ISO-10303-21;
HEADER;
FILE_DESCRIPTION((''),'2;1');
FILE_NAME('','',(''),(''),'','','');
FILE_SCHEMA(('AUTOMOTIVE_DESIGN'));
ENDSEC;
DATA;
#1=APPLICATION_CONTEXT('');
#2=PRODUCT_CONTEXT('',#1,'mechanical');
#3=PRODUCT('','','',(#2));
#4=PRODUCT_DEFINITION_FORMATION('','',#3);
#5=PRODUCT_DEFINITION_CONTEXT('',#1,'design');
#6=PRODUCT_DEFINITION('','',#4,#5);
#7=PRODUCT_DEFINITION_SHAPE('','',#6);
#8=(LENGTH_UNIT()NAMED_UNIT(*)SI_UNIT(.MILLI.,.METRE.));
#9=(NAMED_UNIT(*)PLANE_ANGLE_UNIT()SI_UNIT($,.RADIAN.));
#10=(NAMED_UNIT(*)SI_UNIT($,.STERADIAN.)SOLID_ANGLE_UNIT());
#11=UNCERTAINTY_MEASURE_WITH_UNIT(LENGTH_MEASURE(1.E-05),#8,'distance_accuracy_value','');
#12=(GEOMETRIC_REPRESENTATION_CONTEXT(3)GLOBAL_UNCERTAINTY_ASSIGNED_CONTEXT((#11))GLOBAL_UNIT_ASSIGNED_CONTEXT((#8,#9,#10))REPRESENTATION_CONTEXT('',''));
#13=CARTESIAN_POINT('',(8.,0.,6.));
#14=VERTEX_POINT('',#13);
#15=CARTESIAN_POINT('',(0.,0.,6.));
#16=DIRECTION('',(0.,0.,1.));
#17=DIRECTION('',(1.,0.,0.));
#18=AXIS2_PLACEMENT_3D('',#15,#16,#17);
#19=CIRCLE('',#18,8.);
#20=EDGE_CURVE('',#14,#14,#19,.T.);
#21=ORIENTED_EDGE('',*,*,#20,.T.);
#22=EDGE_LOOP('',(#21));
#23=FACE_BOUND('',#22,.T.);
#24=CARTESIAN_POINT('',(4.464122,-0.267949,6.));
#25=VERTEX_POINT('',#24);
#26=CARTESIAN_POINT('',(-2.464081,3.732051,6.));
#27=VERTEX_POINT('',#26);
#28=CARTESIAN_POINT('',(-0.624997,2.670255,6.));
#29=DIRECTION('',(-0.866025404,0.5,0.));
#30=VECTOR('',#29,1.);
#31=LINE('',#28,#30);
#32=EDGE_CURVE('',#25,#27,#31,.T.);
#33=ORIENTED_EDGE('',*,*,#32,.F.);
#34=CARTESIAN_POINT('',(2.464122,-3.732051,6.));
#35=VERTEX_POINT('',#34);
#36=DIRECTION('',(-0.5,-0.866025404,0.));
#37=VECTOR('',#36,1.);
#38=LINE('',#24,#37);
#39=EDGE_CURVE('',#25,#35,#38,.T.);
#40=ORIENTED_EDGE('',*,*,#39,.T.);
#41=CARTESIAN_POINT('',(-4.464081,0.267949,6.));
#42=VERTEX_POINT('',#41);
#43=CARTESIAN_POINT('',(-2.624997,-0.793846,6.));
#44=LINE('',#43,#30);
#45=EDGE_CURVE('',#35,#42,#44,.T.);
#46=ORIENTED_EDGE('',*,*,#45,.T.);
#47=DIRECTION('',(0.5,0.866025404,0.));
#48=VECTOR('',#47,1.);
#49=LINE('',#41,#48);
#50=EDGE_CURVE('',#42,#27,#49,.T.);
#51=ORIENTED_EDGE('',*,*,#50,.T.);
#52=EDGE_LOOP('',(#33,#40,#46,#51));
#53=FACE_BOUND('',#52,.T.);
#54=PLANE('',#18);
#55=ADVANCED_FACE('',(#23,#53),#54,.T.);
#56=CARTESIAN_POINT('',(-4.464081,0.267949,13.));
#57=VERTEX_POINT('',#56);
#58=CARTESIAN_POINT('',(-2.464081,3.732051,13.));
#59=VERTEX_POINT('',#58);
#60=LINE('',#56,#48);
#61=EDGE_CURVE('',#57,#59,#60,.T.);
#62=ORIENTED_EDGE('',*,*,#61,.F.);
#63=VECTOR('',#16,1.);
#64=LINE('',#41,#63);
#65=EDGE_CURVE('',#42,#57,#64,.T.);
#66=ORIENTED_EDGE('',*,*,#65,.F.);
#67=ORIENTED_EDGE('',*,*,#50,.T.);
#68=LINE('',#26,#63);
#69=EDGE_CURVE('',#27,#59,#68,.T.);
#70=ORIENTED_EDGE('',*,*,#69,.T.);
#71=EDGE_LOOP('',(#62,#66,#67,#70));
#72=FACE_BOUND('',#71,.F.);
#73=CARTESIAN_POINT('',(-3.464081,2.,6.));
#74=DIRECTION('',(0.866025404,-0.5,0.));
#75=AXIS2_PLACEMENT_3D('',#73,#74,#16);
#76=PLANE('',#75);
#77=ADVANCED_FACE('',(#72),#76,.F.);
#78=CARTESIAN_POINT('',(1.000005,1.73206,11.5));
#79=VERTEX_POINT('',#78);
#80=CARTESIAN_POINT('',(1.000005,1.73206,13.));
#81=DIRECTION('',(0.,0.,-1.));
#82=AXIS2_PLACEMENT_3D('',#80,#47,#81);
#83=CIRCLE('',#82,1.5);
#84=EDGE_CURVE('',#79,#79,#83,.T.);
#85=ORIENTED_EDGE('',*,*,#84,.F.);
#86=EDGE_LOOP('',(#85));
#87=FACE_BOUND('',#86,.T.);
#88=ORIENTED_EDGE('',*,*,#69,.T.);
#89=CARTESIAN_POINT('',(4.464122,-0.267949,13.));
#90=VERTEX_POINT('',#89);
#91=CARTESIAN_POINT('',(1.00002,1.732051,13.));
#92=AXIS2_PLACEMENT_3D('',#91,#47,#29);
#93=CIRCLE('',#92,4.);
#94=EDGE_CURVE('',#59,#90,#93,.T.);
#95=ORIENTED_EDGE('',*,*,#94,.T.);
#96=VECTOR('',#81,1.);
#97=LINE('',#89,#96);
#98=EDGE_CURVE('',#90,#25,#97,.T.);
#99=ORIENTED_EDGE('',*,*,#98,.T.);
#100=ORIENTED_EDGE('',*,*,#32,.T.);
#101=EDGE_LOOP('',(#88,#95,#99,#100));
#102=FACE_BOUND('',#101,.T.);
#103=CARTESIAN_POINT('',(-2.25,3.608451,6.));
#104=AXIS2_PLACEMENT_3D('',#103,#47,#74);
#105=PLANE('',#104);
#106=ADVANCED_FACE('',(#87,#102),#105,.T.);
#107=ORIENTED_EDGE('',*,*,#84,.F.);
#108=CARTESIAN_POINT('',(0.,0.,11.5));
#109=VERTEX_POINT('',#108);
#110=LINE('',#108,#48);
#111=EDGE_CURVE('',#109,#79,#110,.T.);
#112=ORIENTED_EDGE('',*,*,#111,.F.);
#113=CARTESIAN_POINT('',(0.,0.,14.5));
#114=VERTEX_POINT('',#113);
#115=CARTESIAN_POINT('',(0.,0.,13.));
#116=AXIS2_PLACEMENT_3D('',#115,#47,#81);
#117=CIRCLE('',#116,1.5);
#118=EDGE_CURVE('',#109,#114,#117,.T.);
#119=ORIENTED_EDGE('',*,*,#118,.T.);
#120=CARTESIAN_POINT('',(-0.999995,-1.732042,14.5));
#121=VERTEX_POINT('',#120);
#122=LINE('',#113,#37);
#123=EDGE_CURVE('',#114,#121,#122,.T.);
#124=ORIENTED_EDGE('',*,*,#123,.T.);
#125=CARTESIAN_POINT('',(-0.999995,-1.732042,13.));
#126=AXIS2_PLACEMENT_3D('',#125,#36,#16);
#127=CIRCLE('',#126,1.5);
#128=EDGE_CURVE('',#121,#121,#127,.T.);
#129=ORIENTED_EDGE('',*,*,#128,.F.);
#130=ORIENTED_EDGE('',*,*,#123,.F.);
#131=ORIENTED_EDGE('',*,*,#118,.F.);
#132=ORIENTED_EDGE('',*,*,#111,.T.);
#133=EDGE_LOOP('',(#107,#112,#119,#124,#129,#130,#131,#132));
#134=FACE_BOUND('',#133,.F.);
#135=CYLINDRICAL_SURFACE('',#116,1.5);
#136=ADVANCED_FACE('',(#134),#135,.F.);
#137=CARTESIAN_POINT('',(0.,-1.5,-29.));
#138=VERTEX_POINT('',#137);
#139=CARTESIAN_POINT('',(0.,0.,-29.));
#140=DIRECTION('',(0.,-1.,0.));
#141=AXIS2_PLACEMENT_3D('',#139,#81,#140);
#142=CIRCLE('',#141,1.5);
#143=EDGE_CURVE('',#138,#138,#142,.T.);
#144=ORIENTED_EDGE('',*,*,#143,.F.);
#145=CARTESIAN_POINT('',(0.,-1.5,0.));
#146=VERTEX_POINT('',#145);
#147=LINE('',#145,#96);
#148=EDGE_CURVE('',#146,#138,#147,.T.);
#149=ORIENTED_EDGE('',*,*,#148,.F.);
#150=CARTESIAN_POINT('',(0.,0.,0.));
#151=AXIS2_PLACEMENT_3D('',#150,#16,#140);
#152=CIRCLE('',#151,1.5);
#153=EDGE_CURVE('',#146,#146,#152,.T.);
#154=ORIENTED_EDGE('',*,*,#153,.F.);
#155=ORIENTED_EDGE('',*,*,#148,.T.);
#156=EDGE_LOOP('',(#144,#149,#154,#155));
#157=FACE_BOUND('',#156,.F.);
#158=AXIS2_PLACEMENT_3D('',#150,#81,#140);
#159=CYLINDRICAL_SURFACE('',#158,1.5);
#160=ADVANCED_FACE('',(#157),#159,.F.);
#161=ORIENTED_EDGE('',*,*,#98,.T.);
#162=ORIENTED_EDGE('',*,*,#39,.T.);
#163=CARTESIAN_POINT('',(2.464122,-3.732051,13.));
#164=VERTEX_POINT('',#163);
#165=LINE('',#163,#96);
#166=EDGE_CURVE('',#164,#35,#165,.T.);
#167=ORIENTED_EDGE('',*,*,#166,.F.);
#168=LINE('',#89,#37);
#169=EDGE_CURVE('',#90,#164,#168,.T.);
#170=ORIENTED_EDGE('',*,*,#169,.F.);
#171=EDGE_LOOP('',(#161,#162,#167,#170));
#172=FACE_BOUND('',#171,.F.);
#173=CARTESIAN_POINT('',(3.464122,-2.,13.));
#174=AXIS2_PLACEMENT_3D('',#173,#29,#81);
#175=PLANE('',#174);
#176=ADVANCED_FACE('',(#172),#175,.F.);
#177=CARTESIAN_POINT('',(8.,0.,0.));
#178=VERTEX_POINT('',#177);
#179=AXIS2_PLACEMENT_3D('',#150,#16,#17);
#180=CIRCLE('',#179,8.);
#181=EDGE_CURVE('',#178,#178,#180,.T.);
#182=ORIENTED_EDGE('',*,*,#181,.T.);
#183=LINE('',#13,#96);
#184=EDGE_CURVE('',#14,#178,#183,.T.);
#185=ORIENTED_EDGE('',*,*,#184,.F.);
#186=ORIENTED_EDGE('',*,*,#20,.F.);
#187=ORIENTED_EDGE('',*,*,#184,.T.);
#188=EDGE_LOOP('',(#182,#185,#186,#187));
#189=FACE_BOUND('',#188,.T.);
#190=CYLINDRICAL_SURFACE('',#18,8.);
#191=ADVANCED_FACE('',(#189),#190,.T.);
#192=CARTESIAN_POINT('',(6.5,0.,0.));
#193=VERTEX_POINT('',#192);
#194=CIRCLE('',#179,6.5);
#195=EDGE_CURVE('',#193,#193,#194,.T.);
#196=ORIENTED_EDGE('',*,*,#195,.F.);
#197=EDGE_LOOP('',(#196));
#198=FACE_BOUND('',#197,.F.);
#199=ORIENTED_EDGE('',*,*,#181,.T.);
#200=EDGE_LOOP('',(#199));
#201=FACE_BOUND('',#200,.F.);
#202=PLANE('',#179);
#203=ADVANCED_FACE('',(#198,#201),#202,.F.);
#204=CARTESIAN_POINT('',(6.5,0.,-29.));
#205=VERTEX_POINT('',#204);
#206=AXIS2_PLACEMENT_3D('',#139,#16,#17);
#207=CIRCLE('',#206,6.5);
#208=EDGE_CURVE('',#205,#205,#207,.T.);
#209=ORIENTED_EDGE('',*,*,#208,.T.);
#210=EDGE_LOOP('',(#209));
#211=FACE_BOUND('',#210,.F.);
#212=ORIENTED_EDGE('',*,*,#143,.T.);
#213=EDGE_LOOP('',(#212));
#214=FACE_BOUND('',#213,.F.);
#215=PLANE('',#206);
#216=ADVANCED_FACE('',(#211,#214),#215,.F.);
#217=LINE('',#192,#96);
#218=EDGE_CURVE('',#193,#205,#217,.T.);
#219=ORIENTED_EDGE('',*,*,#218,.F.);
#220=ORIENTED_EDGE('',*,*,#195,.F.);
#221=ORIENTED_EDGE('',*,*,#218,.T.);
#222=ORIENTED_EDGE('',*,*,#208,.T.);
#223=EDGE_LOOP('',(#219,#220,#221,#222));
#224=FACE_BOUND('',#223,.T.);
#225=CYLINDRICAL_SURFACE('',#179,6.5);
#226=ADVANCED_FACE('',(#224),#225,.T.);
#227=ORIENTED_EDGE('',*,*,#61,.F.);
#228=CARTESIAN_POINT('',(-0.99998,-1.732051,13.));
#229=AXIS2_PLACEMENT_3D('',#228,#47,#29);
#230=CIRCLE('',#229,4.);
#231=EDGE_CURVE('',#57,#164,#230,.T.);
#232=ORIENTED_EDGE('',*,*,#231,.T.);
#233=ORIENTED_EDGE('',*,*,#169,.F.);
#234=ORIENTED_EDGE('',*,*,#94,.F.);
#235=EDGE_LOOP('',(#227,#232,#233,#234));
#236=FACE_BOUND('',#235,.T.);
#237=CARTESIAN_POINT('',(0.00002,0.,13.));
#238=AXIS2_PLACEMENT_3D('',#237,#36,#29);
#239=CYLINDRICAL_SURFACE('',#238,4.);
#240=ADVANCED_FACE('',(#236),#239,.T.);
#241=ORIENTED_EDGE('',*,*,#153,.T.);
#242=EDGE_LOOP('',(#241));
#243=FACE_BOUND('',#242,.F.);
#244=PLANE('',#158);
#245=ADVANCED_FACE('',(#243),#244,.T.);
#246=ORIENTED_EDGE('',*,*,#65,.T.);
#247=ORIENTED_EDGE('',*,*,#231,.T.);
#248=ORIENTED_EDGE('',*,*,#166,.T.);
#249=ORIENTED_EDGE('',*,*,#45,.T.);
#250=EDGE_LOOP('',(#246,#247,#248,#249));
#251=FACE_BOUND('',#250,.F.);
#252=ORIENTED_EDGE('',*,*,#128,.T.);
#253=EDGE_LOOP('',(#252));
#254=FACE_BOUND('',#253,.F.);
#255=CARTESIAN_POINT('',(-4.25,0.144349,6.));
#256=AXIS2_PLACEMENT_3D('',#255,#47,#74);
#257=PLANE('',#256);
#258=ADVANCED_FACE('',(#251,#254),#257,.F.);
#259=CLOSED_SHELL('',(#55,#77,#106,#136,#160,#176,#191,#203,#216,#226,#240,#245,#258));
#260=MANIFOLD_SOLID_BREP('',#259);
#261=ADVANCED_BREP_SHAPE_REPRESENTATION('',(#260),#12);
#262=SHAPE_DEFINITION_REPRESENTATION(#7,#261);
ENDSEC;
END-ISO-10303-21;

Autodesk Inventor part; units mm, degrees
ref_plane "YZ Plane" through (0, 0, 0) normal (1, 0, 0) x (0, 1, 0)
ref_plane "XZ Plane" through (0, 0, 0) normal (0, 1, 0) x (-1, 0, 0)
ref_plane "XY Plane" through (0, 0, 0) normal (0, 0, 1) x (1, 0, 0)
sketch "スケッチ1" plane through (0, 0, 0) normal (0, 0, 1) x (1, 0, 0)
  line L0 (0, 7.5056) -> (6.5, 3.7528)
  line L1 (6.5, 3.7528) -> (6.5, -3.7528)
  line L2 (6.5, -3.7528) -> (0, -7.5056)
  line L3 (0, -7.5056) -> (-6.5, -3.7528)
  line L4 (-6.5, -3.7528) -> (-6.5, 3.7528)
  line L5 (-6.5, 3.7528) -> (0, 7.5056)
  circle A0 centre (0, 0) radius 6.5
  dimension "d0" = 13
  dimension "d1" = 13
extrude "押し出し1" add sketch "スケッチ1" along normal blind 6
extrude "押し出し2" add sketch "スケッチ1" against normal blind 29 contours A0
ref_plane "作業平面1" through (-3.25, 1.8764, 6) normal (0.5, 0.8660254, 0) x (0.8660254, -0.5, 0)
sketch "スケッチ2" plane through (-3.25, 1.8764, 6) normal (0.5, 0.8660254, 0) x (0.8660254, -0.5, 0)
  line L0 (0, 6) -> (3.7528, 6) projected
  line L1 (0, 6) -> (0, 0) projected
  line L2 (7.5056, 0) -> (0, 0) projected
  line L3 (7.5056, 6) -> (7.5056, 0) projected
  line L4 (3.7528, 6) -> (3.7528, -7)
  line L5 (3.7528, -7) -> (3.7528, 0) construction
  line L6 (7.7528, -7) -> (7.7528, 0)
  line L7 (-0.2472, 0) -> (-0.2472, -7)
  arc A0 (-0.2472, -7) -> (7.7528, -7) centre (3.7528, -7) ccw
  arc A1 (7.7528, 0) -> (-0.2472, 0) centre (3.7528, 0) ccw
  line L8 (3.7528, 6) -> (7.5056, 6) projected
  point P0 (3.7528, -3.5)
  dimension "d7" = 7
  dimension "d8" = 8
extrude "押し出し3" add sketch "スケッチ2" along normal mid plane 4 contours A1 L4 L2 L1 | L1 L2 L3 A1 L6 A0 L7 | A1 L3 L2 L4
hole "穴1" at (0, 0, 13) direction (0.5, 0.8660254, 0) diameter 3 end through all
hole "穴2" at (0, 0, 13) direction (-0.5, -0.8660254, 0) diameter 3 end through all
hole "穴3" at (0, 0, 0) direction (0, 0, -1) diameter 3 end through all
sketch "スケッチ3" plane through (0, 0, 6) normal (0, 0, 1) x (1, 0, 0)
  circle A0 centre (0, 0) radius 1.5 projected
  circle A1 centre (0, 0) radius 8
  dimension "d32" = 16
extrude "押し出し4" add sketch "スケッチ3" against normal blind 6
properties part number "ダンパー上パーツ"
